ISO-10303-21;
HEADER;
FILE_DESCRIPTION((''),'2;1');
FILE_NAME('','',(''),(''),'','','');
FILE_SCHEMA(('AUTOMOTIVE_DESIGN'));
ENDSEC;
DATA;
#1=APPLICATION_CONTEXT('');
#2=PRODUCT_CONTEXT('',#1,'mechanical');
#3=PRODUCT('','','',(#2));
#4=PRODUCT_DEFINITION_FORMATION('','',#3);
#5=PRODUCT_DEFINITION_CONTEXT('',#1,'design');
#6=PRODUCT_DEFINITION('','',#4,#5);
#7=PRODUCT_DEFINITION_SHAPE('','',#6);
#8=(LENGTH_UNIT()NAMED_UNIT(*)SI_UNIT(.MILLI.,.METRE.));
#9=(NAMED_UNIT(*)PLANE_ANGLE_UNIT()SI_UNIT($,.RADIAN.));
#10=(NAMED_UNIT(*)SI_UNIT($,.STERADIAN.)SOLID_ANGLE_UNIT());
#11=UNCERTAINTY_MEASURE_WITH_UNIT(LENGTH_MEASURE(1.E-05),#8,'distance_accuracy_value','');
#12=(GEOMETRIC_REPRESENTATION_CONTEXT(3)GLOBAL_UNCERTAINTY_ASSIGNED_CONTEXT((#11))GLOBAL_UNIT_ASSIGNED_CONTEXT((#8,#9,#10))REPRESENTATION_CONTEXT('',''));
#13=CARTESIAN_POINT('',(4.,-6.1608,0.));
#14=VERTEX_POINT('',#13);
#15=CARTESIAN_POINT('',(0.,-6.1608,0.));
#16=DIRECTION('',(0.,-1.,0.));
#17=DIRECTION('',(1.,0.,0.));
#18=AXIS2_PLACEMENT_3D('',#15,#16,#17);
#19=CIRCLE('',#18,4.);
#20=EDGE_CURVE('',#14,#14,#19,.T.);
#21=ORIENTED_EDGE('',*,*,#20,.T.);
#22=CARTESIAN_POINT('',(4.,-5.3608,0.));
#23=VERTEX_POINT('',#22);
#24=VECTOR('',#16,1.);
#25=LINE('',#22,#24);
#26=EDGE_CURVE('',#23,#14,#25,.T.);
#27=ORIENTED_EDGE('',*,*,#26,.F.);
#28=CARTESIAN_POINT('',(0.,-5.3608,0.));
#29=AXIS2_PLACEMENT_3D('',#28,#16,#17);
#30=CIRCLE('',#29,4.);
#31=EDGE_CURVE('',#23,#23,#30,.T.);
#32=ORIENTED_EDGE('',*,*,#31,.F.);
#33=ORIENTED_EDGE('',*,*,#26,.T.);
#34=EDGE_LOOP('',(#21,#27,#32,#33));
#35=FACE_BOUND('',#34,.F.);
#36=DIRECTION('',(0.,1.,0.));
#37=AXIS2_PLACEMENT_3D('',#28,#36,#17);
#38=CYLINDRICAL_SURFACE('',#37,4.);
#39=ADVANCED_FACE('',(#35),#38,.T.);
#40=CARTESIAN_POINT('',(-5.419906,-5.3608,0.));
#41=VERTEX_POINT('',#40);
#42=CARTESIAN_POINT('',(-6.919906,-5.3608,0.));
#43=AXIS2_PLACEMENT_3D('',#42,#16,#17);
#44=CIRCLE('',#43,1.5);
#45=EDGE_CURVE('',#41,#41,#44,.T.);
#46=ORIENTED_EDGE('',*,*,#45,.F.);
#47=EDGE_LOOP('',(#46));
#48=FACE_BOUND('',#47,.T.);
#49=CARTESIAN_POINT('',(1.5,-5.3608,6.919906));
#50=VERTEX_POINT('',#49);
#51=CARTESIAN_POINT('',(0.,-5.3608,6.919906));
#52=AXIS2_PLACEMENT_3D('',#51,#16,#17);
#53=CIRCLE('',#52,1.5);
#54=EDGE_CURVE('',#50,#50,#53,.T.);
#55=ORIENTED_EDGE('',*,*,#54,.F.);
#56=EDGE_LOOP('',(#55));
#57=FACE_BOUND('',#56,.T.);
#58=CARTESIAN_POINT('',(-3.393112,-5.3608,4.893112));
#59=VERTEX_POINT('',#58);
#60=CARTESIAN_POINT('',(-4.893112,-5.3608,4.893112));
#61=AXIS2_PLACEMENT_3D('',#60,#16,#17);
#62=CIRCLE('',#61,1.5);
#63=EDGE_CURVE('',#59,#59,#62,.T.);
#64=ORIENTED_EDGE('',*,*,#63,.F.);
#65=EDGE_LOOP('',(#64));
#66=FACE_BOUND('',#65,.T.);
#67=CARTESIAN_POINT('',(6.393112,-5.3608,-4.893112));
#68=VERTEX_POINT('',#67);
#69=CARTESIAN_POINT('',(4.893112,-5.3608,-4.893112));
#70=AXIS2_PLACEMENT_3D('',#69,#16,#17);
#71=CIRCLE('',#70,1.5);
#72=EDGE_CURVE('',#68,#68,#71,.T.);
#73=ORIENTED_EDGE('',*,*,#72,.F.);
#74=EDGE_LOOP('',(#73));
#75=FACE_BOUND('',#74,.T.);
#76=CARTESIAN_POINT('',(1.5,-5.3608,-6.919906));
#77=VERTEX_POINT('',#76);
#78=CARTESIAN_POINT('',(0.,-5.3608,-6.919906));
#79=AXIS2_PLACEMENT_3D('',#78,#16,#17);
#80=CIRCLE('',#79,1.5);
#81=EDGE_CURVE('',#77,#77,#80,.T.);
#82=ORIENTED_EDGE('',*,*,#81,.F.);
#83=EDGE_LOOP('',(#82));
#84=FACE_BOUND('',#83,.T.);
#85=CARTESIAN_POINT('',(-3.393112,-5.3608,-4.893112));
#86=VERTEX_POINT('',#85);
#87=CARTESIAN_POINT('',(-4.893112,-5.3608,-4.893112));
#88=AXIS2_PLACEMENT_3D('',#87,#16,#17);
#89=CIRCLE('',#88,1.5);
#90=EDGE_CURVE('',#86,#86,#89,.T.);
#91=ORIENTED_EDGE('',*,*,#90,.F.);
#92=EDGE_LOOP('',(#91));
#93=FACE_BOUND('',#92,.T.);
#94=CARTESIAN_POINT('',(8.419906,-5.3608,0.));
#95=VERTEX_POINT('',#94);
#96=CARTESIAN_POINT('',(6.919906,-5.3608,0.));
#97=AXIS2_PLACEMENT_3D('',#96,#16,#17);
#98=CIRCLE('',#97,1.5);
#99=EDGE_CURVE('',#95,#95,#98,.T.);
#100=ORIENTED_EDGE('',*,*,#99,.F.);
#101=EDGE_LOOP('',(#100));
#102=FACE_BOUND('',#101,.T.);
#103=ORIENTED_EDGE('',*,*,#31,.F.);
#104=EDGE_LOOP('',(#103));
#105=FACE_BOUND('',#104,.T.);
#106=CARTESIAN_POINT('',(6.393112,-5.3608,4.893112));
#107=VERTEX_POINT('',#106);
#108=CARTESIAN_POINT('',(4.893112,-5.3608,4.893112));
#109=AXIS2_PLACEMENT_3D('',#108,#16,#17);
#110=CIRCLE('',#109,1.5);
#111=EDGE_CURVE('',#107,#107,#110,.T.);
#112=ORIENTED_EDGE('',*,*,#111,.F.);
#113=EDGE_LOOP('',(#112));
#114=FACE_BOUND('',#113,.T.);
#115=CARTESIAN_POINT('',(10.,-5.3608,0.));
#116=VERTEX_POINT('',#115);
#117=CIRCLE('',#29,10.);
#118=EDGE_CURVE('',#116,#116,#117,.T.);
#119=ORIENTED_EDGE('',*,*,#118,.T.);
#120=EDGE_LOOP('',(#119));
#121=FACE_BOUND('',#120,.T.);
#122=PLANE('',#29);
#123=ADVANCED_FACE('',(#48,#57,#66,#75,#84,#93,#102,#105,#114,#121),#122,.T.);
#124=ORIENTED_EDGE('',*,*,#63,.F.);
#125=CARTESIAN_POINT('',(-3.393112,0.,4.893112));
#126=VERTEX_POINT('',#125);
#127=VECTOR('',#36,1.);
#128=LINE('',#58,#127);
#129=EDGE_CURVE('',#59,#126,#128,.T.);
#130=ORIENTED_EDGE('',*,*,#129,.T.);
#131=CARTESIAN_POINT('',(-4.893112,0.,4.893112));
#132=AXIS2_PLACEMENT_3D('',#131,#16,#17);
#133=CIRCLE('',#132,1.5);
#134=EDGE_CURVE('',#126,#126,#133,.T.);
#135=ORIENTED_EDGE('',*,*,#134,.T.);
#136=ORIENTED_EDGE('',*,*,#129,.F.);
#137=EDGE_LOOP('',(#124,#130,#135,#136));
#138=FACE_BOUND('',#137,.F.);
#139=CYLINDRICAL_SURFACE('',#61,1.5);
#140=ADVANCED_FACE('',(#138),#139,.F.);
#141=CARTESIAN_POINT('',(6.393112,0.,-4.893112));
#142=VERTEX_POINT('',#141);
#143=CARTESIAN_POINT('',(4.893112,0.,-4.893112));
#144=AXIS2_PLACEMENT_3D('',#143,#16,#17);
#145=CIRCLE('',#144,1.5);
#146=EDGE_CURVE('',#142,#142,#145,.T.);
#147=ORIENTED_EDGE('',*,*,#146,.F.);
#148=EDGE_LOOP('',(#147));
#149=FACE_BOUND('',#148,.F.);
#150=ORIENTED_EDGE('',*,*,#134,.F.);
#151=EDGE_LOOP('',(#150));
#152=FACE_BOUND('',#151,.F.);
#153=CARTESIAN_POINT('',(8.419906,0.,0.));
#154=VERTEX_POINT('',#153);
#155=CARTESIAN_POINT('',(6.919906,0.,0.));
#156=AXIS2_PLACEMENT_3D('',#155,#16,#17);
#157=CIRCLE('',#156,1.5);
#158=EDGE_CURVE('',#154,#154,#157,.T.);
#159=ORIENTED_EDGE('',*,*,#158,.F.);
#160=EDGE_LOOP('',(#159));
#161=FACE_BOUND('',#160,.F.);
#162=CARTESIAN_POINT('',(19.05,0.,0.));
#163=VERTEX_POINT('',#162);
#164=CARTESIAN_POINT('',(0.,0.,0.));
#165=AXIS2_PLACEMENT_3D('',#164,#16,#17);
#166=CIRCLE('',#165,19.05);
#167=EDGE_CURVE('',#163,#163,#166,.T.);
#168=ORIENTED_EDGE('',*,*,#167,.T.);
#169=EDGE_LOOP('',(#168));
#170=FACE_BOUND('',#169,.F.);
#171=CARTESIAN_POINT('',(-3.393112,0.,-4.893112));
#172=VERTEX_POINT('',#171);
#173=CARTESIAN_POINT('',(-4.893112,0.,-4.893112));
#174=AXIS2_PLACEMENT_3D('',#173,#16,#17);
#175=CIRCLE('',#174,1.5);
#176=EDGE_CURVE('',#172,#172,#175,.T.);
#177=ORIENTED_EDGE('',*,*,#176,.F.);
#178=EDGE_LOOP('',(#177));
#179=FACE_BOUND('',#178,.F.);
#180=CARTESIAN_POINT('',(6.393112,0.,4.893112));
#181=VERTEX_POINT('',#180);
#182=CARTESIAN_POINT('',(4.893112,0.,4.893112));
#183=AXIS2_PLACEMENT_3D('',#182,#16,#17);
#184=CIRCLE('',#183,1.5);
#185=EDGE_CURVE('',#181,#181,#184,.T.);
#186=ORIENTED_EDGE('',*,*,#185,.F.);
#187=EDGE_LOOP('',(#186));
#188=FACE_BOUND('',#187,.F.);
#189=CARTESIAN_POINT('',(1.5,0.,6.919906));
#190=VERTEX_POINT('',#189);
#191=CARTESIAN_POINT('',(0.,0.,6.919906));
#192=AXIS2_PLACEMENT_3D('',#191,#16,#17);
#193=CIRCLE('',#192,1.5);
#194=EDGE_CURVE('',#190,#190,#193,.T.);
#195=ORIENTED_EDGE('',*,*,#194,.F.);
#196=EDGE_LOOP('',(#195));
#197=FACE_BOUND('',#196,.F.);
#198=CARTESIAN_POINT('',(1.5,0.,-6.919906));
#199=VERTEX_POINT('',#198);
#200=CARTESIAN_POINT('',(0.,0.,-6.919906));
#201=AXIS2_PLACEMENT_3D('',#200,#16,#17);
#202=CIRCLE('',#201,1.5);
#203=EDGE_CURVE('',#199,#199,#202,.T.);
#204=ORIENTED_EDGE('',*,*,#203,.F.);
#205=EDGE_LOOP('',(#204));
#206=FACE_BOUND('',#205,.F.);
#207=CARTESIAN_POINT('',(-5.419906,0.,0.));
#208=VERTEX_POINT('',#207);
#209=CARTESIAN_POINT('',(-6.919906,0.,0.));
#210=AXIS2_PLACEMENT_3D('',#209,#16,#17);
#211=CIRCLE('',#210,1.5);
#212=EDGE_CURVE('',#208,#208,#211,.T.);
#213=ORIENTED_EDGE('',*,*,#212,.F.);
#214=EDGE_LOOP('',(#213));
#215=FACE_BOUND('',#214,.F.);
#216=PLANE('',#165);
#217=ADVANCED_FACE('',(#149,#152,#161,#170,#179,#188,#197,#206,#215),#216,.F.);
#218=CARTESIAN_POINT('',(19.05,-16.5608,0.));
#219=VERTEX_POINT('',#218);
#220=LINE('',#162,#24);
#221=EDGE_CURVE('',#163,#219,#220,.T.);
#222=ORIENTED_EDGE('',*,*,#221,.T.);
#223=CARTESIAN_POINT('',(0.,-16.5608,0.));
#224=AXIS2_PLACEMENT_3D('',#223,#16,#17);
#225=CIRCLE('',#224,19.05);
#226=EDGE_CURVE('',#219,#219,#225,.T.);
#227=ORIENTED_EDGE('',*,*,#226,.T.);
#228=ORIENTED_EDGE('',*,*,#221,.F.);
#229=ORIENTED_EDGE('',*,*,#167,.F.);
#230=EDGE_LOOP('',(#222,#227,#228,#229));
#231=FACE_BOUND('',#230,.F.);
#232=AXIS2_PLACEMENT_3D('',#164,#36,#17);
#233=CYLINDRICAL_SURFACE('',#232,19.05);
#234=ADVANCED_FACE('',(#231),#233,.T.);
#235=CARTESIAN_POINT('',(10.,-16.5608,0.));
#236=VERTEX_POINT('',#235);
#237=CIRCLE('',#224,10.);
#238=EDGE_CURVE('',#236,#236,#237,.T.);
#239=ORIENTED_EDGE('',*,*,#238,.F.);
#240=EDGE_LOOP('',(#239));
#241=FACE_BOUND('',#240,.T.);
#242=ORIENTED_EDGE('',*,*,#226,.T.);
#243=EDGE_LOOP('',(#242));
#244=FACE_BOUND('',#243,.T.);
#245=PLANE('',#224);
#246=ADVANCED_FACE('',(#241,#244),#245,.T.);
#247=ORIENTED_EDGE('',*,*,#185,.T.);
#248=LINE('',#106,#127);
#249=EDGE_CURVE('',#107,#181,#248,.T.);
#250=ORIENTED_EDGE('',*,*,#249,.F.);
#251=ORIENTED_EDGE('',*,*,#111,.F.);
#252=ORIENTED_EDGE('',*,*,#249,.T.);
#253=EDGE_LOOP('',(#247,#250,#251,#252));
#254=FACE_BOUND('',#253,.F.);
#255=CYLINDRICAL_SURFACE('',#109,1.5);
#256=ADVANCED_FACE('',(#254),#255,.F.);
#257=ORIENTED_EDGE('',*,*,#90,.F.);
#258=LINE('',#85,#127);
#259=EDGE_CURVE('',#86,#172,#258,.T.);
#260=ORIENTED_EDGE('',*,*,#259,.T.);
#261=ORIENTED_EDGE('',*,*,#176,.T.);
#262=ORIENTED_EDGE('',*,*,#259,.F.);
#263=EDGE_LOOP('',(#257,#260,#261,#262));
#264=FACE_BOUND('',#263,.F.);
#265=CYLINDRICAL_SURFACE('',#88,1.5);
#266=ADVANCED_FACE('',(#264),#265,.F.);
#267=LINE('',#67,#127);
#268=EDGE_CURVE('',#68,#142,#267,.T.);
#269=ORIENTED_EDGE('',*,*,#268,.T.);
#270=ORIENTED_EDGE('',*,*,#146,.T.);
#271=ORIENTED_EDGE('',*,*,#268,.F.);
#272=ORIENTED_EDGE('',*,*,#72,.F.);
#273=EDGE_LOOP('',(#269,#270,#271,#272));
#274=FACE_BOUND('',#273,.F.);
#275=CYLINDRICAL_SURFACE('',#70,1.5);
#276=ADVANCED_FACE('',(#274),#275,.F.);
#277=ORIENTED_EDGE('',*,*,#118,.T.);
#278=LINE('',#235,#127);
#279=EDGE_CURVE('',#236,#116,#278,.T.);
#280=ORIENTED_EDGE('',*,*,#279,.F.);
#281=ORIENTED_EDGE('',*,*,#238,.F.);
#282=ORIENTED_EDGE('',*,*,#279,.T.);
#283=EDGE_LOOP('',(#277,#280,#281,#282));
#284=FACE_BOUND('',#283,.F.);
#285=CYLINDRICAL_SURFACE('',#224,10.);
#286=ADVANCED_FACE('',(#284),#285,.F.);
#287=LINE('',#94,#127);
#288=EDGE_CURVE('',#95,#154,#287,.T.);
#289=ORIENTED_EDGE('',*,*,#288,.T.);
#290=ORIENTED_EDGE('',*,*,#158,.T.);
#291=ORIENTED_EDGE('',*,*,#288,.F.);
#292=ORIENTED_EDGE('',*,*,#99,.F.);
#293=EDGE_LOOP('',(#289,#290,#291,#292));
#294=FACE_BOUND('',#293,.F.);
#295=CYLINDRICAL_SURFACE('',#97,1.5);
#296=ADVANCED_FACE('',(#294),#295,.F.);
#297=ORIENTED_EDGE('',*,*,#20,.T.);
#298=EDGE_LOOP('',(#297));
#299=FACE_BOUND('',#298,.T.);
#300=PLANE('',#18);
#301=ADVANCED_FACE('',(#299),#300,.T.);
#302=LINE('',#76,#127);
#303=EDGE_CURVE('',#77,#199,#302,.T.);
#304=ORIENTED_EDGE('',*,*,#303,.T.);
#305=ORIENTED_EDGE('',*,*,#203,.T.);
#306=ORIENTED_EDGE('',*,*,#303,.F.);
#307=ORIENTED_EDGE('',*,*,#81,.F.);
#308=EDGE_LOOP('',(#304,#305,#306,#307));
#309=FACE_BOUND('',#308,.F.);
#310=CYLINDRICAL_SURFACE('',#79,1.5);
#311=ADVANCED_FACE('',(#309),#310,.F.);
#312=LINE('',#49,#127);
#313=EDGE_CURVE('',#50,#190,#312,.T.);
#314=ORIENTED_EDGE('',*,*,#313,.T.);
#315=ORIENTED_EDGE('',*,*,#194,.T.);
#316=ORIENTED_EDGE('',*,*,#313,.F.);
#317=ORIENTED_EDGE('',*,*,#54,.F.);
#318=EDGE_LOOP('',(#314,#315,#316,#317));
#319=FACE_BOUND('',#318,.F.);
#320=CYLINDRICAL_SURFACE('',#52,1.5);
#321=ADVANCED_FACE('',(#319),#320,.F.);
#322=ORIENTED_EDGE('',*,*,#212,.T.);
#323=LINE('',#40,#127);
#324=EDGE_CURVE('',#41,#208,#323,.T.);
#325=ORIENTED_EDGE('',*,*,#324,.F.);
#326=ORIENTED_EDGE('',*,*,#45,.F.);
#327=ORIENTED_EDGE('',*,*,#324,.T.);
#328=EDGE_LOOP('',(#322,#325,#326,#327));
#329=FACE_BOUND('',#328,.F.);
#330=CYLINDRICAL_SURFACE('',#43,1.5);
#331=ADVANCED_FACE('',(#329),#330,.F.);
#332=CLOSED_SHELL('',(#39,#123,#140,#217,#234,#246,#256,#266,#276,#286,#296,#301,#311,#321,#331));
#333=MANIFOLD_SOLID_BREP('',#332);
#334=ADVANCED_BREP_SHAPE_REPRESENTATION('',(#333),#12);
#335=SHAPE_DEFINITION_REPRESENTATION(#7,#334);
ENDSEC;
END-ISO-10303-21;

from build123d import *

# Parameters (mm, degrees)
F0_R     = 19.05
F1_DEPTH = 16.5608
F2_R     = 10
F3_DEPTH = 11.2
F4_R     = 4
F5_DEPTH = 0.8
F8_R     = 1.5
F9_DEPTH = 6


# Not quite as in the source:
# - the program builds the solid bodies; features that only make, move or delete a surface that nothing else refers to are left out


with BuildPart() as f1:
    # F0 (on Front) → F1 (new body)
    with BuildSketch(Plane.XZ):
        Circle(F0_R)
    extrude(amount=F1_DEPTH)

    # F2 (on face) → F3 (cut)
    with BuildSketch(Plane.XZ.offset(16.5608)):
        Circle(F2_R)
    extrude(amount=-F3_DEPTH, mode=Mode.SUBTRACT)

    # F4 (on face) → F5 (join)
    with BuildSketch(Plane.XZ.offset(5.3608)):
        Circle(F4_R)
    extrude(amount=F5_DEPTH)

    # F8 (on face) → F9 (cut)
    with BuildSketch(Plane.XZ.offset(5.3608)):
        with Locations((0, 6.9199060356)):
            Circle(F8_R)
        with Locations((-4.8931124829, 4.8931124829)):
            Circle(F8_R)
        with Locations((-6.9199060356, 0)):
            Circle(F8_R)
        with Locations((-4.8931124829, -4.8931124829)):
            Circle(F8_R)
        with Locations((0, -6.9199060356)):
            Circle(F8_R)
        with Locations((4.8931124829, -4.8931124829)):
            Circle(F8_R)
        with Locations((6.9199060356, 0)):
            Circle(F8_R)
        with Locations((4.8931124829, 4.8931124829)):
            Circle(F8_R)
    extrude(amount=-F9_DEPTH, mode=Mode.SUBTRACT)


solid = f1.part
